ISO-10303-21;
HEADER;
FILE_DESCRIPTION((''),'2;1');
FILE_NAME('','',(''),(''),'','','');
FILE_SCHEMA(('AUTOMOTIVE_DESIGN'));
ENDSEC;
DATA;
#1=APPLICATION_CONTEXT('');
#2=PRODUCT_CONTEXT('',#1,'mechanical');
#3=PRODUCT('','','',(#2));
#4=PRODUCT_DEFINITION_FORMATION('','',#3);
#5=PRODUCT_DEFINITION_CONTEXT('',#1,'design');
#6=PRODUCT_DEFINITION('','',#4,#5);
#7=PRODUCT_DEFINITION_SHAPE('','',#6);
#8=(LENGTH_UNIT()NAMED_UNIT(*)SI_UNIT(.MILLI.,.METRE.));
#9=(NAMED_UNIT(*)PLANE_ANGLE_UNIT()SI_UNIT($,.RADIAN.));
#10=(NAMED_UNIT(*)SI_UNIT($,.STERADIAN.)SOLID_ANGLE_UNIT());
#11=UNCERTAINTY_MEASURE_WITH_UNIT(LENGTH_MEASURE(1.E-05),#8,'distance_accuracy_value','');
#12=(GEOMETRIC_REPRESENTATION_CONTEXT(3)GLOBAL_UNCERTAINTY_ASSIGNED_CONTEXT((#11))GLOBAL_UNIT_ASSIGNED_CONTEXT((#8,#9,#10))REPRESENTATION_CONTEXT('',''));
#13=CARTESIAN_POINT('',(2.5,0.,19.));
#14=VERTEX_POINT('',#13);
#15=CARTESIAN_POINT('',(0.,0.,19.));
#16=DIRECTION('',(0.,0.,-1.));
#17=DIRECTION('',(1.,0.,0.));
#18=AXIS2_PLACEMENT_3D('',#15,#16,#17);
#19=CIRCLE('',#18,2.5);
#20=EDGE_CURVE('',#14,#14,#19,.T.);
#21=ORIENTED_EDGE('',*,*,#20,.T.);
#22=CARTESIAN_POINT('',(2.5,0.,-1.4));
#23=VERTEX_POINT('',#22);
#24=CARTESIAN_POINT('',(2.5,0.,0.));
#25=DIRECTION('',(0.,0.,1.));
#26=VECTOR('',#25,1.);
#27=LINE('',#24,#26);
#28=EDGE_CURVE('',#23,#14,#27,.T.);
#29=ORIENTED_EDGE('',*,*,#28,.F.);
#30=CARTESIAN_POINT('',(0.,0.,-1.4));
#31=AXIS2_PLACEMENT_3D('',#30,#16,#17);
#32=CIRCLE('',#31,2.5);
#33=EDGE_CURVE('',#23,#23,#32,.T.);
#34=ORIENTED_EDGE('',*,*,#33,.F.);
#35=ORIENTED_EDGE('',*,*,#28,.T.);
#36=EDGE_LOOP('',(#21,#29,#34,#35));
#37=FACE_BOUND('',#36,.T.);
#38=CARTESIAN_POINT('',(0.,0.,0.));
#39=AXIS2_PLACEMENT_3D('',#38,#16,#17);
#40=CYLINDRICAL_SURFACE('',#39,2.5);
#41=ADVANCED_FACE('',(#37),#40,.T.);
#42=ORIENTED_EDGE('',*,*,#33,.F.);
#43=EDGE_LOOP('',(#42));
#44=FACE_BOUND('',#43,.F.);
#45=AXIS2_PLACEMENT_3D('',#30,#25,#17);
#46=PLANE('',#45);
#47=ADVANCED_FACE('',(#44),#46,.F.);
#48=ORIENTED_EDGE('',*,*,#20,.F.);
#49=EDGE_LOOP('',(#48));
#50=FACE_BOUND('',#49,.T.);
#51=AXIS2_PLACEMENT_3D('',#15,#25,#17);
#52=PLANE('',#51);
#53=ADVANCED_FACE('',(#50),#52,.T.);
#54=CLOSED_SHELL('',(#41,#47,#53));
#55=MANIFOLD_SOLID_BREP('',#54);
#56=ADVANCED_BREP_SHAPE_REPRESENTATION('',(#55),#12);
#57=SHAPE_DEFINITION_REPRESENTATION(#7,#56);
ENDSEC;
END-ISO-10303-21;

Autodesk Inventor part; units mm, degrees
ref_plane "YZ Plane" through (0, 0, 0) normal (1, 0, 0) x (0, 1, 0)
ref_plane "XZ Plane" through (0, 0, 0) normal (0, 1, 0) x (-1, 0, 0)
ref_plane "XY Plane" through (0, 0, 0) normal (0, 0, 1) x (1, 0, 0)
sketch "스케치1" plane through (0, 0, 0) normal (0, 0, 1) x (1, 0, 0)
  circle A0 centre (0, 0) radius 2.5
  dimension "d0" = 5
extrude "돌출1" add sketch "스케치1" along normal blind 19
move faces "이동1" translate (0, 0, -1.4) faces at (1.2612, -0.6619, 0)
properties part number "Ball_joint_up"
